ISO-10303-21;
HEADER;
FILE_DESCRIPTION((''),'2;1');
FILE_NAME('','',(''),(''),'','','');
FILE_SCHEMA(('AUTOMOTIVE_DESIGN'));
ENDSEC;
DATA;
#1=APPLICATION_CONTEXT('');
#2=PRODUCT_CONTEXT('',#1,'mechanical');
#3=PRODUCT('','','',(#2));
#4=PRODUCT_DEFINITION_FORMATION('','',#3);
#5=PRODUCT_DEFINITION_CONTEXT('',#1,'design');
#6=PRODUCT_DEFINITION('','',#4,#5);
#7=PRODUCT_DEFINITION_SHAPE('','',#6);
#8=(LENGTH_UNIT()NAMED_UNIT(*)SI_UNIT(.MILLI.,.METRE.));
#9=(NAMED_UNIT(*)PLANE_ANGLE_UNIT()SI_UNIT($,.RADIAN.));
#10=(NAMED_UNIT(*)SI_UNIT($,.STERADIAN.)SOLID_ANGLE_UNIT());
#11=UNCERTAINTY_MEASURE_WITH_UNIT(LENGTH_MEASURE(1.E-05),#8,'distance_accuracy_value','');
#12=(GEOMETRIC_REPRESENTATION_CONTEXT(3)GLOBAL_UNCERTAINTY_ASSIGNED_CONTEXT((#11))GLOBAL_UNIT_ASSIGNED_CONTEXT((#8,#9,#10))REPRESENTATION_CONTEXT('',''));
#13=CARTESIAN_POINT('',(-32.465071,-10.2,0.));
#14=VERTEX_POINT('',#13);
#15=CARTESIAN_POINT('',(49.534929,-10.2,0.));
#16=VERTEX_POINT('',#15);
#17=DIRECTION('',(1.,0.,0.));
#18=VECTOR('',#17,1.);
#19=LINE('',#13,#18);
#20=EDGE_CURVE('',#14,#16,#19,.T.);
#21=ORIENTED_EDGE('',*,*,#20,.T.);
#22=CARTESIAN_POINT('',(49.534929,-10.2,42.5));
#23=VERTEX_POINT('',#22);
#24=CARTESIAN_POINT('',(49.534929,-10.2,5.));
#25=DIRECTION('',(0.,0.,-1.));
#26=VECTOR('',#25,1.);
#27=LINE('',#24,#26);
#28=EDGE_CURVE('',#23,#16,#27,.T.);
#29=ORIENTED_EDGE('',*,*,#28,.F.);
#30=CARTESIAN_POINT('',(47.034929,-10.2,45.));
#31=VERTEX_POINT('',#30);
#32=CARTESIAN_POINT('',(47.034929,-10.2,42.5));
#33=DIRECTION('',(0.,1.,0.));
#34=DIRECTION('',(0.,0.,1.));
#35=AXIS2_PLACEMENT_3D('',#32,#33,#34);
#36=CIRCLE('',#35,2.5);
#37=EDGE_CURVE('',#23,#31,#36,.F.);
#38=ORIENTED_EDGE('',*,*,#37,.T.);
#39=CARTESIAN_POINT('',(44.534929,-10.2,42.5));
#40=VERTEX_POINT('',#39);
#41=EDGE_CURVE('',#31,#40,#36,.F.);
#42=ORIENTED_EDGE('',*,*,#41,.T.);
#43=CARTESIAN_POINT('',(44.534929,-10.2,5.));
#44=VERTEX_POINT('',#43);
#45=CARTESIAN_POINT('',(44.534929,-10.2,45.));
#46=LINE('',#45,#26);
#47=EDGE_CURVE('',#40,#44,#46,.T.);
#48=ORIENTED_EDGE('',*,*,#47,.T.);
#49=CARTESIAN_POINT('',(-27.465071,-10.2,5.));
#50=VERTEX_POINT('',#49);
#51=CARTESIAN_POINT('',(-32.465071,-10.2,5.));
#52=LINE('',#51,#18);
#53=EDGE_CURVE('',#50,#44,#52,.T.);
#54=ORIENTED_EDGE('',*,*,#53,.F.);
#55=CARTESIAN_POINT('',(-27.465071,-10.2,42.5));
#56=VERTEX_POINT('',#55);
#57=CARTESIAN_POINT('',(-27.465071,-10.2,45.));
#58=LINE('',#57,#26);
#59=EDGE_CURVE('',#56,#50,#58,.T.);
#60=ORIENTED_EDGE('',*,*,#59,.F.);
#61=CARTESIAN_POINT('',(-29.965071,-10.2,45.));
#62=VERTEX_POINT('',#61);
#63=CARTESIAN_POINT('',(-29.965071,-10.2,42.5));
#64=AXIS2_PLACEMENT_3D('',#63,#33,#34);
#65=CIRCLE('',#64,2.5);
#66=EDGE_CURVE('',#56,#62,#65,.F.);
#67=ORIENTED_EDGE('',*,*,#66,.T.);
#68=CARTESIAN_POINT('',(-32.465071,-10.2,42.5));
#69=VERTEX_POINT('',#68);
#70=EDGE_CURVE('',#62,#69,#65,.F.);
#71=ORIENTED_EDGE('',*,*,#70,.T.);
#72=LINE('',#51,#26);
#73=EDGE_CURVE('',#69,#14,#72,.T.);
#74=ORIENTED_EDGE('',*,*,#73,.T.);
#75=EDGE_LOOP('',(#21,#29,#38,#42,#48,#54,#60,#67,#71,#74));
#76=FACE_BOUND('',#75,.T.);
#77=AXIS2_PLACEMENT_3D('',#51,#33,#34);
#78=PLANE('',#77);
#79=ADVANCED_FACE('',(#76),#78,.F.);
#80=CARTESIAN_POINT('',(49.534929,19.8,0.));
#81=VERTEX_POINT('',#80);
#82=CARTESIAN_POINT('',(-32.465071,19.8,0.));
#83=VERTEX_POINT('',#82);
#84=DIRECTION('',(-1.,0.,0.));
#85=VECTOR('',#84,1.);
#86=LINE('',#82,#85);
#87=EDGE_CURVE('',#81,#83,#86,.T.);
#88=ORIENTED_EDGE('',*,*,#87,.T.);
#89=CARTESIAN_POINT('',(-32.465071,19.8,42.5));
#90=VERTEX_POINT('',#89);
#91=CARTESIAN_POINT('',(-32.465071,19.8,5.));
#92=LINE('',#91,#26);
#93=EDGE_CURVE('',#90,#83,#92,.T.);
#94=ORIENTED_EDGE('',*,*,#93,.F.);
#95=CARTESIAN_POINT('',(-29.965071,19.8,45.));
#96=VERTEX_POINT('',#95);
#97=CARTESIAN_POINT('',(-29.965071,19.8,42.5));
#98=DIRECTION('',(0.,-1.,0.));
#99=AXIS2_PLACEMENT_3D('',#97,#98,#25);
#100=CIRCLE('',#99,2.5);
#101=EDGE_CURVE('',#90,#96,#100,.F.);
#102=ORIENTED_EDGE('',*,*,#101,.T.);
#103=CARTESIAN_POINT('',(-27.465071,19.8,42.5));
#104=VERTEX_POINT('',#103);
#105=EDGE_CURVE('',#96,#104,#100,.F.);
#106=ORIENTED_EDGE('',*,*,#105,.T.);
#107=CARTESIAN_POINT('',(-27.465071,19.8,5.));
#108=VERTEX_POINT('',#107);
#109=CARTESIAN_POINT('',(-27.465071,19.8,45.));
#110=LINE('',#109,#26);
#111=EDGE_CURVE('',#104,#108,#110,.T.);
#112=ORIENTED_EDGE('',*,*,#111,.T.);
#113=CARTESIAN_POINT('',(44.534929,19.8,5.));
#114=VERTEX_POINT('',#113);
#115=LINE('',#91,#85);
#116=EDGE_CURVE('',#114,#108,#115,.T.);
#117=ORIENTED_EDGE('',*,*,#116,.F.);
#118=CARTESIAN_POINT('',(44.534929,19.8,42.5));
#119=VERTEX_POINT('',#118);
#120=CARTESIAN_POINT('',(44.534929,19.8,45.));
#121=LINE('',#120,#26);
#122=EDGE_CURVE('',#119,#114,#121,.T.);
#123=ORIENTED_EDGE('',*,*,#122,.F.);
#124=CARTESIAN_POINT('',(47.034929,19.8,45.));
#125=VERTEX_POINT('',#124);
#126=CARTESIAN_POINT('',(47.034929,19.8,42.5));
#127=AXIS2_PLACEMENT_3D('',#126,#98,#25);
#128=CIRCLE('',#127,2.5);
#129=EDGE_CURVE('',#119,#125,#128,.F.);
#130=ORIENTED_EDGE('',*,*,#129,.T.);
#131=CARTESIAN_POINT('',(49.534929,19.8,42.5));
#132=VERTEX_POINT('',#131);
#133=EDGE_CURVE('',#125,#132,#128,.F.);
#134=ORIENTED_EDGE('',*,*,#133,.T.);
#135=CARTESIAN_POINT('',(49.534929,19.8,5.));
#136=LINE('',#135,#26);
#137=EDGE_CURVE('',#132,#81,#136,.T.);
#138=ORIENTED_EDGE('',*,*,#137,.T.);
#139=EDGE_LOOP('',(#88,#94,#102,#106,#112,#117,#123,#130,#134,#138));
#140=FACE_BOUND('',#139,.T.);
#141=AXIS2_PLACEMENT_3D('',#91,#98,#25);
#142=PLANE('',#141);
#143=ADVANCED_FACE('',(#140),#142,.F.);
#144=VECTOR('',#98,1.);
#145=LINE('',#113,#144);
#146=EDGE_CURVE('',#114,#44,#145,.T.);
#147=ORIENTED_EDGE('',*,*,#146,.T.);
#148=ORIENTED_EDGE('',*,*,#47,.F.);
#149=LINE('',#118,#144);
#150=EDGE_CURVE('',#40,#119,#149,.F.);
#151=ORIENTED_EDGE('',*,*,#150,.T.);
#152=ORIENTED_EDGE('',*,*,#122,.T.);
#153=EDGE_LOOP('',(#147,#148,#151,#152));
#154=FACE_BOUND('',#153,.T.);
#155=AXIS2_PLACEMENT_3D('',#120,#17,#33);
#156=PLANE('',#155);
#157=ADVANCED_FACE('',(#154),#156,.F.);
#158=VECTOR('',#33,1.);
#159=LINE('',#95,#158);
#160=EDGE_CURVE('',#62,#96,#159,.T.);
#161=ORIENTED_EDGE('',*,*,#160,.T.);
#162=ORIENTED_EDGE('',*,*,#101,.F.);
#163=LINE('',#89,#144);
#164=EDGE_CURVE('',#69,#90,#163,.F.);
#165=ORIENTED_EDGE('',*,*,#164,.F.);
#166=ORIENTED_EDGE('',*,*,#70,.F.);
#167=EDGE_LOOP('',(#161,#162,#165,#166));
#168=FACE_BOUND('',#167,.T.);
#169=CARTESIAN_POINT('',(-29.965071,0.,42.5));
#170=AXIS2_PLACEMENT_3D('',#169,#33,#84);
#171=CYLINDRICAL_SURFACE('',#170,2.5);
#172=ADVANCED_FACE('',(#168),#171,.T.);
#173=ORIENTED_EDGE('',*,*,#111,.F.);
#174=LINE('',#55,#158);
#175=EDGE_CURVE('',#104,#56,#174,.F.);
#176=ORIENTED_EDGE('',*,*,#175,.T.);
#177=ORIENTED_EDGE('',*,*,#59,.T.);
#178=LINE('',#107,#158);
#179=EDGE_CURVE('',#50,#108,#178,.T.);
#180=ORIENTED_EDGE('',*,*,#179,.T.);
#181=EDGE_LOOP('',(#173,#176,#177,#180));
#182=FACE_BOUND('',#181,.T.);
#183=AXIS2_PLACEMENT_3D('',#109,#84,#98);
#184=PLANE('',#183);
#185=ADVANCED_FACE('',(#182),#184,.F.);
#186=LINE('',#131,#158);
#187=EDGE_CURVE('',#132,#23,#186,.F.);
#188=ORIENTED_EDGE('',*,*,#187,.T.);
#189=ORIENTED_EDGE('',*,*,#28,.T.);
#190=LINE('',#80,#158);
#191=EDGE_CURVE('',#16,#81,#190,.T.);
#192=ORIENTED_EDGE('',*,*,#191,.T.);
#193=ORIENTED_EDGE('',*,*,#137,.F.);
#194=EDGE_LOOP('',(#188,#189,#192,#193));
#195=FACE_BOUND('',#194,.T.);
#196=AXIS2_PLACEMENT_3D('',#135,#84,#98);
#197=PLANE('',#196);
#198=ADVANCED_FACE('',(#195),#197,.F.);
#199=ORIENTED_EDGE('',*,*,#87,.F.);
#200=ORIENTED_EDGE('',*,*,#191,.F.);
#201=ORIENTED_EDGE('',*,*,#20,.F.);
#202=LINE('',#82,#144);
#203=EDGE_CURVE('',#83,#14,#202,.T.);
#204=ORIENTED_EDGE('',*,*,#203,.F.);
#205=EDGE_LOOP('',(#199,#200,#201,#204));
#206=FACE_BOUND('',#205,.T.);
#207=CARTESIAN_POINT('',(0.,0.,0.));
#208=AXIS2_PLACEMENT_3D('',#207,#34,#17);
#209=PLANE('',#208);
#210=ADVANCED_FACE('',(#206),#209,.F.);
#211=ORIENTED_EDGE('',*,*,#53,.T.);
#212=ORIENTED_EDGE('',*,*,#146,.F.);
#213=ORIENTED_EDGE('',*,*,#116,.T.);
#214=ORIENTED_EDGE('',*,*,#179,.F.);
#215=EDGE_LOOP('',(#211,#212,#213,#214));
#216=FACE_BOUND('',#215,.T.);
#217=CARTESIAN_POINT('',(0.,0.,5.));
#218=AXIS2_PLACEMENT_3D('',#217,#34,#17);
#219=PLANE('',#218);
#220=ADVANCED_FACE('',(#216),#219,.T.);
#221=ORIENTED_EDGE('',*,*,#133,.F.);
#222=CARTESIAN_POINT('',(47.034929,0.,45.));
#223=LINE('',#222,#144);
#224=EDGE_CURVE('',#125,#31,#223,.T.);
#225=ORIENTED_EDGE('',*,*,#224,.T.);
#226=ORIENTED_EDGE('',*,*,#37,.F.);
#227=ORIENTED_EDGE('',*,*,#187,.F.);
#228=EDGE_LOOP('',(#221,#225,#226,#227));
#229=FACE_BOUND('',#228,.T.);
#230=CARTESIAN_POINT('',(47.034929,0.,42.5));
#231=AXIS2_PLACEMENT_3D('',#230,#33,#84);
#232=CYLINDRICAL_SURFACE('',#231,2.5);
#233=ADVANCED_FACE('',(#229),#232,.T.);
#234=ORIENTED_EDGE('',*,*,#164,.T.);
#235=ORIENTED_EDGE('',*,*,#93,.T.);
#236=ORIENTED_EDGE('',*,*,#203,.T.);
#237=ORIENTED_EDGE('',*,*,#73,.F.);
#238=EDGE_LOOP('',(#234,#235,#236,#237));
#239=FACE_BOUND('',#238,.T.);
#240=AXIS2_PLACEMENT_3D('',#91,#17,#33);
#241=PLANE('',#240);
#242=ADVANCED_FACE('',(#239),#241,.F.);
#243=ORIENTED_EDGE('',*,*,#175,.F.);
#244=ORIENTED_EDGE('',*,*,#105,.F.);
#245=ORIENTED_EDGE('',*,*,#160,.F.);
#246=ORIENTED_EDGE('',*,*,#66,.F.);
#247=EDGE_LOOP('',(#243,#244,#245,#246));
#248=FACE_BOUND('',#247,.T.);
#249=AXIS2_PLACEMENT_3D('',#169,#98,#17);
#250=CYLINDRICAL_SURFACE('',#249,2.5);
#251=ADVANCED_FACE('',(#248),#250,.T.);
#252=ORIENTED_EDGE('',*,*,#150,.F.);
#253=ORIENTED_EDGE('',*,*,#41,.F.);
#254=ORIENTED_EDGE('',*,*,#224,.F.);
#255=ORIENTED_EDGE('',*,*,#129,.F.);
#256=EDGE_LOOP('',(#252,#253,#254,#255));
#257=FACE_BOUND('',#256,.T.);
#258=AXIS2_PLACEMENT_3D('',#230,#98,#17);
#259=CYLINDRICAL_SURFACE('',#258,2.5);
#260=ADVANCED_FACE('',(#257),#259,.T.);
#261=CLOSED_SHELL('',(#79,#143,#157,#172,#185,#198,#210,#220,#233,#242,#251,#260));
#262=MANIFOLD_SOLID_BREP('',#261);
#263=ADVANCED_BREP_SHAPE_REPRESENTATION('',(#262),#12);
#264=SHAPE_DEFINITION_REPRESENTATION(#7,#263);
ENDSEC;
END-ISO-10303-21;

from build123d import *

# Parameters (mm, degrees)
SKETCH_1_W      = 82
SKETCH_1_H      = 30
EXTRUDE_1_DEPTH = 5
SKETCH_2_W      = 5
SKETCH_2_H      = 30
EXTRUDE_2_DEPTH = 40
FILLET_1_R      = 2.5


with BuildPart() as part:
    # 草圖1 → 填料-伸長1 (new body)
    with BuildSketch(Plane.XY):
        with Locations((8.53492865, 4.8)):
            Rectangle(SKETCH_1_W, SKETCH_1_H)
    extrude(amount=EXTRUDE_1_DEPTH)

    # 草圖2 → 填料-伸長2 (add)
    with BuildSketch(Plane.XY.offset(5)):
        with Locations((-29.96507135, 4.8)):
            Rectangle(SKETCH_2_W, SKETCH_2_H)
        with Locations((47.03492865, 4.8)):
            Rectangle(SKETCH_2_W, SKETCH_2_H)
    extrude(amount=EXTRUDE_2_DEPTH)

    # 圓角1
    fillet_1_edges = [part.edges().sort_by_distance(p)[0] for p in [
        (44.53492865, 4.8, 45),
        (-27.46507135, 4.8, 45),
        (49.53492865, 4.8, 45),
        (-32.46507135, 4.8, 45),
    ]]
    fillet(fillet_1_edges, radius=FILLET_1_R - 0.0001)  # a hair under: the kernel refuses the full size


solid = part.part
